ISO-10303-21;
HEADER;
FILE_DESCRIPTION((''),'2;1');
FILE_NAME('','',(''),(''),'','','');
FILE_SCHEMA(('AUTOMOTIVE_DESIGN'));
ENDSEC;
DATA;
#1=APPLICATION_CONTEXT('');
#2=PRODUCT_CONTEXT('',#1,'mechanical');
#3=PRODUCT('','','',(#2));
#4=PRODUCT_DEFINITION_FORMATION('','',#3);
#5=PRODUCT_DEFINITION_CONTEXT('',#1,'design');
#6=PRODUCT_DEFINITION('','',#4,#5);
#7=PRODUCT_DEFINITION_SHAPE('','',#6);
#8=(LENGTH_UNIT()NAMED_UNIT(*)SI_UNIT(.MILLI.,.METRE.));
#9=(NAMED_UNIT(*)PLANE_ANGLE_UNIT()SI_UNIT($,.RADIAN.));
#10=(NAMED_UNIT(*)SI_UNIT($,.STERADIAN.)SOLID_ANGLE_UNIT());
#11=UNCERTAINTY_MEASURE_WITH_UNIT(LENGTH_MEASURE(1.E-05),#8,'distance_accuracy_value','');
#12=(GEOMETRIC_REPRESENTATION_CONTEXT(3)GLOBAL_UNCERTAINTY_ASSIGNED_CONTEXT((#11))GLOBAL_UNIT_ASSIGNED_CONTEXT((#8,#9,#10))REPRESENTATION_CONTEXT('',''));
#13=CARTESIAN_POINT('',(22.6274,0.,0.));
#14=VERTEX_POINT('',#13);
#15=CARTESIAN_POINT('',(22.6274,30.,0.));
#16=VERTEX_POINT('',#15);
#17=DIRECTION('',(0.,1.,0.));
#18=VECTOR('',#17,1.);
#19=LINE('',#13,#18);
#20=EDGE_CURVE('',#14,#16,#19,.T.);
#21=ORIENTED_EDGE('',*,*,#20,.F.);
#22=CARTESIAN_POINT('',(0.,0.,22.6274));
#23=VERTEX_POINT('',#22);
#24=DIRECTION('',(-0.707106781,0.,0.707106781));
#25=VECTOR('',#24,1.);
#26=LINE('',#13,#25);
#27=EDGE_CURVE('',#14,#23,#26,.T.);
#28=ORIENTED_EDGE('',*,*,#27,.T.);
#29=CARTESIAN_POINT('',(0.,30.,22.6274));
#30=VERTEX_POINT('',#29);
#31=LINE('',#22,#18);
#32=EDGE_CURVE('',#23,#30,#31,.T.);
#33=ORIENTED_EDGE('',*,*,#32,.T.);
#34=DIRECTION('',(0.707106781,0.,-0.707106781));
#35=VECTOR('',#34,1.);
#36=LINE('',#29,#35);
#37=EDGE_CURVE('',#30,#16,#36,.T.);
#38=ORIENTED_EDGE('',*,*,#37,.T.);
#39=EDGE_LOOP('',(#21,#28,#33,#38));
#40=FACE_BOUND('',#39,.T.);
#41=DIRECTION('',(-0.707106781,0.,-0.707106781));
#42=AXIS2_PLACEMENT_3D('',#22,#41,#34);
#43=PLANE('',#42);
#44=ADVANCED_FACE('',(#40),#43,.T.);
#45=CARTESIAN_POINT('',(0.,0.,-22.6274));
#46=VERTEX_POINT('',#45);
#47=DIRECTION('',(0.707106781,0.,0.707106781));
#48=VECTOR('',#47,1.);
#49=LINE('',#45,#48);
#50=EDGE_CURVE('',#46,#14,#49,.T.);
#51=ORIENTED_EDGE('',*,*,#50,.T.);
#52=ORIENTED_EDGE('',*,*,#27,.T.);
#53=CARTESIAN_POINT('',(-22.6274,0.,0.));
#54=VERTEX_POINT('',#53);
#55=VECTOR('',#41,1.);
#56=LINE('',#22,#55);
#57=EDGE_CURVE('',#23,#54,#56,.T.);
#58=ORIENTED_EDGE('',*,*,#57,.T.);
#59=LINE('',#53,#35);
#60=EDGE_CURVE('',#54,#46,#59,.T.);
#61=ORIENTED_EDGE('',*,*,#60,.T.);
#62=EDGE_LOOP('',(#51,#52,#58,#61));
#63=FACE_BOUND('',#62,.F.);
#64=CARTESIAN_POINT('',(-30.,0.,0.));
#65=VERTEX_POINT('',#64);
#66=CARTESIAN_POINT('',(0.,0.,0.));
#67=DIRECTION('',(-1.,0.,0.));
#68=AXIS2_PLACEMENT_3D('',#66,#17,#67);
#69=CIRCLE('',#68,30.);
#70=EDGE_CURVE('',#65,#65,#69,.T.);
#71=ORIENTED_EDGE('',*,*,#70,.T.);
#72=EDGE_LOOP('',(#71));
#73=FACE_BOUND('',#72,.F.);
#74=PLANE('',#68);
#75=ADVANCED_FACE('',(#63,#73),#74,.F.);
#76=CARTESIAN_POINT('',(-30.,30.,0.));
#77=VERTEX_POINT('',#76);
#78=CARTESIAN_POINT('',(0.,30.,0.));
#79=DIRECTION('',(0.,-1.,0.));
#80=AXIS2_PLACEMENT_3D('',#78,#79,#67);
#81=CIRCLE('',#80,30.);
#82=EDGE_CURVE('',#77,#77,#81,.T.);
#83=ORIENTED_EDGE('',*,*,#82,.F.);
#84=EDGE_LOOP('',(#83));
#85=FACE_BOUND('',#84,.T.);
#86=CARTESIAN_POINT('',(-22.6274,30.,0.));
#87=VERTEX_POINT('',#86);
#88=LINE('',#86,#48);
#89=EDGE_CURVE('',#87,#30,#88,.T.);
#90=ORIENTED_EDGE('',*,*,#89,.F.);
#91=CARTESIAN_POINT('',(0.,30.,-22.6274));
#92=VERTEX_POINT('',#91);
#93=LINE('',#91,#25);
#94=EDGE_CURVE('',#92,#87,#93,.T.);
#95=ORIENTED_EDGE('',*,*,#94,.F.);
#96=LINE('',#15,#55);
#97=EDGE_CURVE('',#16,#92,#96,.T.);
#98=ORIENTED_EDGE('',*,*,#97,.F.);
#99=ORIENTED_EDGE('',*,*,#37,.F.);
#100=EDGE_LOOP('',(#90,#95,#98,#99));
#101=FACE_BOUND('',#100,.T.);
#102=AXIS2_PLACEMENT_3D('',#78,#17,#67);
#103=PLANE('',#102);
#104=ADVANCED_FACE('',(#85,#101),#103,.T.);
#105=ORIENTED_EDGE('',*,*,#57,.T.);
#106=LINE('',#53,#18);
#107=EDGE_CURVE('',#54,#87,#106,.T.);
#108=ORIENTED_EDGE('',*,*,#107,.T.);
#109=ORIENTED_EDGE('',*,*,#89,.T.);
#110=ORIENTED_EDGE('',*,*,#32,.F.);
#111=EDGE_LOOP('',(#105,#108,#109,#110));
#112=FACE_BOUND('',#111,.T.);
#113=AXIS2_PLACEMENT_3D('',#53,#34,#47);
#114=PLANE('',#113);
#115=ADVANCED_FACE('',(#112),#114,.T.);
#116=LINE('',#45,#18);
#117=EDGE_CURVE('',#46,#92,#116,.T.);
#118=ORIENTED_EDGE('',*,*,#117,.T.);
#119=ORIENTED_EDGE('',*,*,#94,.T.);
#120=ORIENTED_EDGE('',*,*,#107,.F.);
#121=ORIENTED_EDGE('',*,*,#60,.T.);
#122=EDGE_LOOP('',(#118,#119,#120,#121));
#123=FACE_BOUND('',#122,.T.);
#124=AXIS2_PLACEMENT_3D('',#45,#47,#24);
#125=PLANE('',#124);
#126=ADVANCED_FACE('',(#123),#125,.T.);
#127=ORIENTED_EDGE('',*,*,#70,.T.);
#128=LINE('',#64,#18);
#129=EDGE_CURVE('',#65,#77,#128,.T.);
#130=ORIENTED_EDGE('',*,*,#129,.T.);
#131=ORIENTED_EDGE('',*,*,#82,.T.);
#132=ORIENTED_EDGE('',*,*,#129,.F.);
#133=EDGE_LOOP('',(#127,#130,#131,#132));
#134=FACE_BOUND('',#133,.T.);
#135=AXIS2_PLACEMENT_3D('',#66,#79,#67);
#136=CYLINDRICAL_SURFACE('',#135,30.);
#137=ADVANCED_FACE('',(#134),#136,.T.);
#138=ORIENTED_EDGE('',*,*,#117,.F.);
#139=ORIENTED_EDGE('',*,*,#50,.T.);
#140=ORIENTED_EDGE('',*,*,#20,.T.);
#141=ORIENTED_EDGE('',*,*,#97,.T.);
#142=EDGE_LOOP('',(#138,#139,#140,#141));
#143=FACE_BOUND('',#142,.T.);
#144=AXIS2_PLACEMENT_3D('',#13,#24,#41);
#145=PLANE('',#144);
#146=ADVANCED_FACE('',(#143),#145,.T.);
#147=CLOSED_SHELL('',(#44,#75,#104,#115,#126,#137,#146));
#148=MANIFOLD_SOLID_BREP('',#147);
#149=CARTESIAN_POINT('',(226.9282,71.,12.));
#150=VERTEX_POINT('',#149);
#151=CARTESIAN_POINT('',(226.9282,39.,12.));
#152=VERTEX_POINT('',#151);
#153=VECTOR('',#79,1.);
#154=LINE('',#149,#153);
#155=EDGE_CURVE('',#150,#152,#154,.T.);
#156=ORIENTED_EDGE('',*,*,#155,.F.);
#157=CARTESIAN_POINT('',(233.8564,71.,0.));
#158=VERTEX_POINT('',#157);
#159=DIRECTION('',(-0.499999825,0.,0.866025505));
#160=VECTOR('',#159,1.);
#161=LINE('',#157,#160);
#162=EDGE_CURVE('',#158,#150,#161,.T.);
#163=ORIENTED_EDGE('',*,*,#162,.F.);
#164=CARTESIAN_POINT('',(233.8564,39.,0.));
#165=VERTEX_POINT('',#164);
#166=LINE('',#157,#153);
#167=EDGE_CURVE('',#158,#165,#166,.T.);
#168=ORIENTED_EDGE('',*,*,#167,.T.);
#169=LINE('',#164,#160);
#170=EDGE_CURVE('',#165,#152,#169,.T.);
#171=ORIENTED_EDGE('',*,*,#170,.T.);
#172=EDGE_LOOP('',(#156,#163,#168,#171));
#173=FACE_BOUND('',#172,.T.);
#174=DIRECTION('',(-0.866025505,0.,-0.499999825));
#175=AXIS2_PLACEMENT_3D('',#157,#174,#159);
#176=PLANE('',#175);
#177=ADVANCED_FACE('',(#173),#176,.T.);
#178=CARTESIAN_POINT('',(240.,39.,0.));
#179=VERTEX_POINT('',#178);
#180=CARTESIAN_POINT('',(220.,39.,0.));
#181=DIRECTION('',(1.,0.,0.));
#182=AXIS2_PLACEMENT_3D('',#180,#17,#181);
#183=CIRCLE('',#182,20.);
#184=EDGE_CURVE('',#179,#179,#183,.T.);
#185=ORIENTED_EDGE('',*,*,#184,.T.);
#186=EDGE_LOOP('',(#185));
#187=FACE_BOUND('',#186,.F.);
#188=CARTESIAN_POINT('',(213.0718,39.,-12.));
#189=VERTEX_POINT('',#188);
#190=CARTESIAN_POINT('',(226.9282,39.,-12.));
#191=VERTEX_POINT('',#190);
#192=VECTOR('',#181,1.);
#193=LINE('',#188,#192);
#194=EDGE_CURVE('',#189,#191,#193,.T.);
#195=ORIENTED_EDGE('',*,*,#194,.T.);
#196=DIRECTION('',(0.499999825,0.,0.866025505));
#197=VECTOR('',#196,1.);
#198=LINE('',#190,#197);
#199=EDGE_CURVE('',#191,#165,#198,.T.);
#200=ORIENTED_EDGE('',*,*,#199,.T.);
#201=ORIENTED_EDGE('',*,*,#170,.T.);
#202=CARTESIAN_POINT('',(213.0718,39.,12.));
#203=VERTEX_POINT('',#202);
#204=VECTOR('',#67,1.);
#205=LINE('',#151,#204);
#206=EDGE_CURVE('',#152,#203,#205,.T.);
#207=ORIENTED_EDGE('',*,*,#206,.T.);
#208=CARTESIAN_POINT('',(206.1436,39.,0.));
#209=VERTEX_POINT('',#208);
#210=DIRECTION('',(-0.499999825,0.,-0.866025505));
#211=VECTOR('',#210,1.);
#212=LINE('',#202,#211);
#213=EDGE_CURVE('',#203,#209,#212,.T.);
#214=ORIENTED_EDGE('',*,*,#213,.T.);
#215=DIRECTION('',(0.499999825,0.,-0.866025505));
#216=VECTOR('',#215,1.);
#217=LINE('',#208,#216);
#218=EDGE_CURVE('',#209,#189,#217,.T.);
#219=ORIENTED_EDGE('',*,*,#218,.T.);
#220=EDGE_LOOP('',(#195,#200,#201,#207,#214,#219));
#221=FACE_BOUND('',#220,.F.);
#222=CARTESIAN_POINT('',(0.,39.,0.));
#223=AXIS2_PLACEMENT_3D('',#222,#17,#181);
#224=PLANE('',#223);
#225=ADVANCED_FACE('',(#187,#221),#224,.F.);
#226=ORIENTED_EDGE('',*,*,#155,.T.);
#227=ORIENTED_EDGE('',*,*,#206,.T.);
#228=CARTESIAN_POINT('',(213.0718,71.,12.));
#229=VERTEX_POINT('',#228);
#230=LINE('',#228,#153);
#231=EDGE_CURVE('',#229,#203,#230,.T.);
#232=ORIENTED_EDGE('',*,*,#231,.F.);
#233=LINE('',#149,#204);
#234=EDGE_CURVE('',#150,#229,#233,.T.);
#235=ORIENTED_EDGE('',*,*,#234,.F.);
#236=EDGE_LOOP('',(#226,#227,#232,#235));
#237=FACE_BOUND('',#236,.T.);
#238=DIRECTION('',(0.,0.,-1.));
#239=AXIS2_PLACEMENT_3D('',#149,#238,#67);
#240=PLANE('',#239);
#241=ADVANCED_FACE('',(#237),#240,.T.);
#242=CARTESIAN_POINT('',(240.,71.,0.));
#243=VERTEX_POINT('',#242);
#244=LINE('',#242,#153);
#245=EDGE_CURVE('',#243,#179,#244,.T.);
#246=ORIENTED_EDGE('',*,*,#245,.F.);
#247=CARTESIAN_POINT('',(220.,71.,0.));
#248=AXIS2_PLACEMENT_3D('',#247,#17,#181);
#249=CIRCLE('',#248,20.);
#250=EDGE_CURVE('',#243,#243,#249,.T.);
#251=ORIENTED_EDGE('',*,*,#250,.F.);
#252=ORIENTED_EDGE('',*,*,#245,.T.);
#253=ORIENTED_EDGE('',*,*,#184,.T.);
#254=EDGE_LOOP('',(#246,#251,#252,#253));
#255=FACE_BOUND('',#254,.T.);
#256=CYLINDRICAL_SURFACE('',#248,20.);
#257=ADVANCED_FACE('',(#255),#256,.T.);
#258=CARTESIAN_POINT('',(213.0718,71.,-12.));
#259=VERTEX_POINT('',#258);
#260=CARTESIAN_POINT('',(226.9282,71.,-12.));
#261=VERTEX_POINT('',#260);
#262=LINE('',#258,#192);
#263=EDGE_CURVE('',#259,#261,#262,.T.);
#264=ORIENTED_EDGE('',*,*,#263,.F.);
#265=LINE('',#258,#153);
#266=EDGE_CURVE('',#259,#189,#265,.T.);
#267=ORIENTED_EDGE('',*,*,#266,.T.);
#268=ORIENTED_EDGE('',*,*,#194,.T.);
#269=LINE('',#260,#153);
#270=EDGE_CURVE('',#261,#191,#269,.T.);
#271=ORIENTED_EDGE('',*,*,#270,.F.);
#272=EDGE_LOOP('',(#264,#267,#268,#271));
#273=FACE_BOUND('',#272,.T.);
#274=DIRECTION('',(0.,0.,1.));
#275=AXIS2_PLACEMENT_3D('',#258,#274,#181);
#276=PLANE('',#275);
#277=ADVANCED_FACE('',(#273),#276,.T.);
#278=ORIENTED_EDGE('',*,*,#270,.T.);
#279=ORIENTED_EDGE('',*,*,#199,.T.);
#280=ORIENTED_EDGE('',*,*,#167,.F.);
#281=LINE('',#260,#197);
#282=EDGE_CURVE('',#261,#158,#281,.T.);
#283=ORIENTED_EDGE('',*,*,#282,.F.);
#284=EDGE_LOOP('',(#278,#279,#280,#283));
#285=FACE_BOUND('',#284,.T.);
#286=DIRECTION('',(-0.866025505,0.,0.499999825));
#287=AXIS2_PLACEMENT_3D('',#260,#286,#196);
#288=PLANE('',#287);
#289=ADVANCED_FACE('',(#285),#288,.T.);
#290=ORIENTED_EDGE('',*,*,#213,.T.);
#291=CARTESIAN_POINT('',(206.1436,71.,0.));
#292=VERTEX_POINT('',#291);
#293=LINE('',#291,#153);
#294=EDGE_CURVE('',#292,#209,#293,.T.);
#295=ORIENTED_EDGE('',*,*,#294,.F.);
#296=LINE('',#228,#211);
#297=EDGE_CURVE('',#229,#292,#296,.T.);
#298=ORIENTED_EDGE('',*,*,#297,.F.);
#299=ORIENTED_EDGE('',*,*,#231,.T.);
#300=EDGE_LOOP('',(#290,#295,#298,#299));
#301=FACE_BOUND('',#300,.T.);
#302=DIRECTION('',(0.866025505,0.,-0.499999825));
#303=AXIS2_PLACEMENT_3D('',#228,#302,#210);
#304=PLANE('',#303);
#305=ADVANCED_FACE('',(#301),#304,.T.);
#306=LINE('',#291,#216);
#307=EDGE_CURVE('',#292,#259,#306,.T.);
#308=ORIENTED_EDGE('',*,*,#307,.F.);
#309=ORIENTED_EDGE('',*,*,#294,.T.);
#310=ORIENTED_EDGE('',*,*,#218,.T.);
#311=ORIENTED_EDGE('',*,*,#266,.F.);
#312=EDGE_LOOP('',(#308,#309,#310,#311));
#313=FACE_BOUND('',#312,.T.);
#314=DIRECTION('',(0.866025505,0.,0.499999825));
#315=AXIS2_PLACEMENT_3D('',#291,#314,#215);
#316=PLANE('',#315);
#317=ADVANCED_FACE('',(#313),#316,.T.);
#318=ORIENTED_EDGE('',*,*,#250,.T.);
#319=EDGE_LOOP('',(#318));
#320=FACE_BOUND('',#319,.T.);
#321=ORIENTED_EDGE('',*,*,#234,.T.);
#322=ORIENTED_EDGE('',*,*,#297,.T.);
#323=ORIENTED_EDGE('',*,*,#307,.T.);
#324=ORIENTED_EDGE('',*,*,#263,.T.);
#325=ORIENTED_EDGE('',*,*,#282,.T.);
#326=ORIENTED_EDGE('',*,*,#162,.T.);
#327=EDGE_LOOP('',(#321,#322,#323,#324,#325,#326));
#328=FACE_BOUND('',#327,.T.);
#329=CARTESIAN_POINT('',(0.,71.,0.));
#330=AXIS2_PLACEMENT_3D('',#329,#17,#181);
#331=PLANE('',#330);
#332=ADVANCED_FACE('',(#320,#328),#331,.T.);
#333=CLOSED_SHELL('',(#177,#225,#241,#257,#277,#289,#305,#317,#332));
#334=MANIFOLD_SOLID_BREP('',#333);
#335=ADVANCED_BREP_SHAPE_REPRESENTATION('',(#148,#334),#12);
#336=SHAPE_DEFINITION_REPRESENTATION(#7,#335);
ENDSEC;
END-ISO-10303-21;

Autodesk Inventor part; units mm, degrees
sketch "草圖1" plane through (0, 0, 0) normal (0, 1, 0) x (-1, 0, 0)
  circle A0 centre (0, 0) radius 30
  line L0 (0, 22.6274) -> (-22.6274, 0)
  line L1 (-22.6274, 0) -> (0, -22.6274)
  line L2 (0, -22.6274) -> (22.6274, 0)
  line L3 (22.6274, 0) -> (0, 22.6274)
  line L4 (17.214, 3.8392) -> (-17.214, -3.8392) construction
  line L5 (-19.542, 13.3062) -> (19.542, -13.3062) construction
  line L6 (11.3137, -11.3137) -> (-26.3636, 26.3636)
  line L7 (-11.3137, -11.3137) -> (19.159, 19.159)
  dimension "d0" = 60
  dimension "d1" = 32
  dimension "d2" = 32
extrude "擠出1" add sketch "草圖1" along normal blind 30
ref_plane "工作平面1" through (0, 71, 0) normal (0, 1, 0) x (1, 0, 0)
sketch "草圖2" plane through (0, 71, 0) normal (0, 1, 0) x (1, 0, 0)
  circle A0 centre (220, 0) radius 20
  line L0 (233.8564, 0) -> (226.9282, -12)
  line L1 (226.9282, -12) -> (213.0718, -12)
  line L2 (213.0718, -12) -> (206.1436, 0)
  line L3 (206.1436, 0) -> (213.0718, 12)
  line L4 (213.0718, 12) -> (226.9282, 12)
  line L5 (226.9282, 12) -> (233.8564, 0)
  point P0 (0, 0)
  dimension "d14" = 220
  dimension "d15" = 40
  dimension "d16" = 0
  dimension "d17" = 24
extrude "擠出2" add sketch "草圖2" against normal blind 32
sketch "草圖3" plane through (0, 0, 0) normal (0, 0, 1) x (1, 0, 0)
  line L0 (0, 0) -> (0, 30) projected
  line L1 (200, 71) -> (240, 71) projected
  line L2 (220, 71) -> (220, 39)
  arc A0 (169.4427, 55) -> (124.7214, 35) centre (169.4427, -5) ccw
  arc A1 (80, 15) -> (124.7214, 35) centre (80, 75) ccw
  line L3 (80, 15) -> (23, 15)
  line L4 (169.4427, 55) -> (204, 55)
  line L5 (204, 55) -> (204, 27.8796)
  point P0 (186.7214, 55)
  point P1 (220, 55)
  point P2 (51.5, 15)
  point P3 (0, 15)
  dimension "d39" = 32
  dimension "d40" = 60
  dimension "d41" = 60
  dimension "d58" = 23
  dimension "d59" = 80
  dimension "d60" = 204
sketch "草圖10" plane through (0, 0, 0) normal (0, 0, 1) x (1, 0, 0)
  line L0 (-30, 0) -> (30, 0) projected
  line L1 (30, 0) -> (30, 46.0087)
  line L2 (200, 39) -> (240, 39) projected
  line L3 (200, 39) -> (200, 88.733)
  point P0 (0, 0)
ref_plane "工作平面8" through (30, 0, 0) normal (1, 0, 0) x (0, 1, 0)
ref_plane "工作平面9" through (200, 39, 0) normal (-1, 0, 0) x (0, -1, 0)
sketch "草圖13" plane through (0, 30, 0) normal (0, 1, 0) x (1, 0, 0)
  point P0 (0, 0)
sketch "草圖14" plane through (220, 71, 0) normal (0, 1, 0) x (1, 0, 0)
  point P0 (-220, 0)
ref_plane "工作平面10" through (23, 15, 0) normal (-1, 0, 0) x (0, -1, 0)
sketch "草圖15" plane through (23, 15, 0) normal (-1, 0, 0) x (0, -1, 0)
  line L0 (15, 0) -> (-15, 0) projected
  ellipse E0 centre (0, 0) end of major axis (0, -19.261) minor radius 8
  dimension "d61" = 19.261
  dimension "d62" = 8
ref_plane "工作平面13" through (206.1436, 71, 0) normal (1, 0, 0) x (0, 1, 0)
sketch "草圖16" plane through (206.1436, 71, 0) normal (1, 0, 0) x (0, 1, 0)
  line L0 (-32, 0) -> (17.733, 0) projected
  ellipse E0 centre (-16, 0) end of major axis (-16, 12) minor radius 8
  point P0 (-71, 0)
  dimension "d63" = 8
  dimension "d64" = 12
properties part number "練習三"
